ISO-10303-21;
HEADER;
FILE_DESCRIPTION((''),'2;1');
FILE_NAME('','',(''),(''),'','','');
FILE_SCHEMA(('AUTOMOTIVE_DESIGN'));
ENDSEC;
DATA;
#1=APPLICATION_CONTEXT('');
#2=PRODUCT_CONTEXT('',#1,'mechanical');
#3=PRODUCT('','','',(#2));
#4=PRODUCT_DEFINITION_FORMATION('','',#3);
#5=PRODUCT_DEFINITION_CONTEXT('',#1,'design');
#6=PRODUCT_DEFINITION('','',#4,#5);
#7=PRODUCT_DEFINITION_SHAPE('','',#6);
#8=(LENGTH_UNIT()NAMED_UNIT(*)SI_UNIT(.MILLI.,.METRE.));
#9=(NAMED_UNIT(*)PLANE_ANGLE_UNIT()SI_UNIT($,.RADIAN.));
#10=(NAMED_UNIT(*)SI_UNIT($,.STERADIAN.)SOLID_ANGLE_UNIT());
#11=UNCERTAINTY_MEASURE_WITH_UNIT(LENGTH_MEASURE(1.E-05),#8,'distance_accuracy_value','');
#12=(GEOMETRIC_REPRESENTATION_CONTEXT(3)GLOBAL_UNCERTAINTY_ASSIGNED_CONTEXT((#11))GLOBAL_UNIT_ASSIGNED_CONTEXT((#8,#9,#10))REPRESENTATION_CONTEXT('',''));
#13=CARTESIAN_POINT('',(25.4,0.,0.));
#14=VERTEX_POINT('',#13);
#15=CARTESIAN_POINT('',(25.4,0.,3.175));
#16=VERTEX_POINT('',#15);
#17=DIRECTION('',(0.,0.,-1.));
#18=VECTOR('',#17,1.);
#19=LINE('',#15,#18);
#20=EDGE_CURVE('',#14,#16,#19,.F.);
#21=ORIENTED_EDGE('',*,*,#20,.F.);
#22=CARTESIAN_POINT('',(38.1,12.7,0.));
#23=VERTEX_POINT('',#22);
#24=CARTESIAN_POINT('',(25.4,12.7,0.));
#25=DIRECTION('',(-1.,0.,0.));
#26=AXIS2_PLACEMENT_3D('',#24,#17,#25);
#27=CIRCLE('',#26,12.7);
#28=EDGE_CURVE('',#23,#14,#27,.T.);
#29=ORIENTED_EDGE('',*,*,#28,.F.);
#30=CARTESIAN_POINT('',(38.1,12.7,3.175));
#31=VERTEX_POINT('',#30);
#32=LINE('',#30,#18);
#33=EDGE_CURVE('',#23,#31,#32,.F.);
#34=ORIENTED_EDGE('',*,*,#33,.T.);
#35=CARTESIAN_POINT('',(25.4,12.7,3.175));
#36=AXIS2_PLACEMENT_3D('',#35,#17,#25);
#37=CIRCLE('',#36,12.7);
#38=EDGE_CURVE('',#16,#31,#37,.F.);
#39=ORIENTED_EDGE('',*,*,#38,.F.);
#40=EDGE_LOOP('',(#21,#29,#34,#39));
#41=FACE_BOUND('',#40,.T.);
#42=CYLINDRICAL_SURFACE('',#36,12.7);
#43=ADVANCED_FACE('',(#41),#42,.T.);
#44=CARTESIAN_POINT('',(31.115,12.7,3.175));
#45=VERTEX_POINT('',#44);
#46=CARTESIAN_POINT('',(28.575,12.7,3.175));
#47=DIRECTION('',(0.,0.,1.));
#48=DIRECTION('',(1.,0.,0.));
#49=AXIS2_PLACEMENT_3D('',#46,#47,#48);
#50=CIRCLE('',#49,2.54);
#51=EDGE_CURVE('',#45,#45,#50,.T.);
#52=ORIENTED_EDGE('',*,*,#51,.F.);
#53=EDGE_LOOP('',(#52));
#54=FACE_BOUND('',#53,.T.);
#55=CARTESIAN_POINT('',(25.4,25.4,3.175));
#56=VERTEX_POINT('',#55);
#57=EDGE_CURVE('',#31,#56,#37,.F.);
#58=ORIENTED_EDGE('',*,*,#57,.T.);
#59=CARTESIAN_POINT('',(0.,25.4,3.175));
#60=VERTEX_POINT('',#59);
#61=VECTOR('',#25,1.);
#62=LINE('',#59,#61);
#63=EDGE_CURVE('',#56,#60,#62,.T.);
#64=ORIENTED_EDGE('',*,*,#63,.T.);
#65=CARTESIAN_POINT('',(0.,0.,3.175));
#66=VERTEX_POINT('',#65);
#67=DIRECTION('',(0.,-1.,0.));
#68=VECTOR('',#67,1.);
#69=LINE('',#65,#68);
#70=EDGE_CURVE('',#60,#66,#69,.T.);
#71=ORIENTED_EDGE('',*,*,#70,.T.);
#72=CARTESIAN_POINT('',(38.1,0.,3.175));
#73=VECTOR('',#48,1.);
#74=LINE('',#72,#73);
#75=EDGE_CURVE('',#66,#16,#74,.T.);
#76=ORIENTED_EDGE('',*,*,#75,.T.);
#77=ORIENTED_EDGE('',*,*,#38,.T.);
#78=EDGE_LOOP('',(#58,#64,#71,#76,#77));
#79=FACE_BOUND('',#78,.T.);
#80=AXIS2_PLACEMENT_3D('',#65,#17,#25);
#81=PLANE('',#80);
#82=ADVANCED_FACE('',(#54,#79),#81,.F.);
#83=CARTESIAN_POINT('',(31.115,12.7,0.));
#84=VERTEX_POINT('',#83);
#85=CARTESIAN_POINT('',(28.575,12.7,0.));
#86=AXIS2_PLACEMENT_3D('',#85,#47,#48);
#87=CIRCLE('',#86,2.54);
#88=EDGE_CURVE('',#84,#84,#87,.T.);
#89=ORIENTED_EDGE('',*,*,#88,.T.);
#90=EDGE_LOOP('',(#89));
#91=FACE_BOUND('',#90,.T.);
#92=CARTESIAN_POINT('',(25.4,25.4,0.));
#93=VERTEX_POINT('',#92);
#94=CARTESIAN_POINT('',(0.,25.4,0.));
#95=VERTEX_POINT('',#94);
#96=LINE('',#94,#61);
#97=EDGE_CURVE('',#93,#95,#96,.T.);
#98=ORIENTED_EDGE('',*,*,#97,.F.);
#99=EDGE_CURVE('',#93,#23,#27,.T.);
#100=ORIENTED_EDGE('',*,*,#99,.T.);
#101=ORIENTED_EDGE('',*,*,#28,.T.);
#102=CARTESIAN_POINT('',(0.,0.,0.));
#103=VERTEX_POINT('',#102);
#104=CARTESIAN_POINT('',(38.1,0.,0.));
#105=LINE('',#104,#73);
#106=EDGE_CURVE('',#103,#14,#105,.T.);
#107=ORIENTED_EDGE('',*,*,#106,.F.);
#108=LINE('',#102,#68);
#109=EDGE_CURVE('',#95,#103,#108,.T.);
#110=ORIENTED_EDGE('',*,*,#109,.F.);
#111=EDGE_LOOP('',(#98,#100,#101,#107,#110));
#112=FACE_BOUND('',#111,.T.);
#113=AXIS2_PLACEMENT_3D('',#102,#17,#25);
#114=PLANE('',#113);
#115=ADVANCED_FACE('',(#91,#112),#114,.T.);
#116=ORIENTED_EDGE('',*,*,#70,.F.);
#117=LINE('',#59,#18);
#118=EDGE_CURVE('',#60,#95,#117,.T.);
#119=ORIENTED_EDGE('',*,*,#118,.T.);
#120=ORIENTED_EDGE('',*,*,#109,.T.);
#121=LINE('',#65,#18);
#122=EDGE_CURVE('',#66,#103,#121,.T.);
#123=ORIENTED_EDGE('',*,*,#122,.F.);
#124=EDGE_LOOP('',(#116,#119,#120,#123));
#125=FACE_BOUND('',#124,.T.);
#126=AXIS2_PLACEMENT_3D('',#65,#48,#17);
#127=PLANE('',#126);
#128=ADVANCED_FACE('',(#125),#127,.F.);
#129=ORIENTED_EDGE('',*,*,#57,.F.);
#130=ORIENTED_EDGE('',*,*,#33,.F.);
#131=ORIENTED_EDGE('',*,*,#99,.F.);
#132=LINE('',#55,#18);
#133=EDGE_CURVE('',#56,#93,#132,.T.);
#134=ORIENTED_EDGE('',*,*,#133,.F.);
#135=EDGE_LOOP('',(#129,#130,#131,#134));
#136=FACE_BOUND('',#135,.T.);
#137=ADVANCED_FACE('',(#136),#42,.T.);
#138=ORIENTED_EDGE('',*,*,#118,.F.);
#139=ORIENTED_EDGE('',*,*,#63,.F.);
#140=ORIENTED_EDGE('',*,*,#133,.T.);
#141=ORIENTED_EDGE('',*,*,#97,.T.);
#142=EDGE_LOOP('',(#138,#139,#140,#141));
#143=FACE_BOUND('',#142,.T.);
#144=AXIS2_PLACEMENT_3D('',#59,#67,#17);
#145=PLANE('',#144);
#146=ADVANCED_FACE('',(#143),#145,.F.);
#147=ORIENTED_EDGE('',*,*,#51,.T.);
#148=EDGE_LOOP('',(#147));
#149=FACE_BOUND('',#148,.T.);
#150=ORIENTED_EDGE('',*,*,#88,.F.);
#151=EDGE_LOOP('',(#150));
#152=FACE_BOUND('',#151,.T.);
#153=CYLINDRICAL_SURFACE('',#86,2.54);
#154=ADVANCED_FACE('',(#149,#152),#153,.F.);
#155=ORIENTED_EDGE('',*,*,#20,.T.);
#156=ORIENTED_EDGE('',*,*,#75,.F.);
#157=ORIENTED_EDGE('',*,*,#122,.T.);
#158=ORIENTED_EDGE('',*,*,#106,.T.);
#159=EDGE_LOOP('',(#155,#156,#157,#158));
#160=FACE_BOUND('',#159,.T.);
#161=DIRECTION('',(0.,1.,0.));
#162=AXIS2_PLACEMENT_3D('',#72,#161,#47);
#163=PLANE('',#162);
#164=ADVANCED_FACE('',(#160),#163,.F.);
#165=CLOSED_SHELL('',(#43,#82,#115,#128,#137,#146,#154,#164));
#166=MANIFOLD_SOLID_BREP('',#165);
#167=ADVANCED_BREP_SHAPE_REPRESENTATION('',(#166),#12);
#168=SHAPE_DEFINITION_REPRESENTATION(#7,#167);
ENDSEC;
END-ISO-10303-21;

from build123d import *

# Parameters (mm, degrees)
SKETCH1_W           = 38.1
SKETCH1_H           = 25.4
BOSS_EXTRUDE1_DEPTH = 3.175
FILLET1_R           = 12.7
SKETCH2_R           = 2.54
CUT_EXTRUDE1_DEPTH  = 46.900442536


with BuildPart() as part:
    # Sketch1 → Boss-Extrude1 (new body)
    with BuildSketch(Plane.XY):
        with Locations((19.05, 12.7)):
            Rectangle(SKETCH1_W, SKETCH1_H)
    extrude(amount=BOSS_EXTRUDE1_DEPTH)

    # Fillet1
    fillet1_edges = [part.edges().sort_by_distance(p)[0] for p in [
        (38.1, 0, 1.5875),
        (38.1, 25.4, 1.5875),
    ]]
    fillet(fillet1_edges, radius=FILLET1_R - 0.0001)  # a hair under: the kernel refuses the full size

    # Sketch2 → Cut-Extrude1 (cut, through all)
    with BuildSketch(Plane.XY.offset(3.175)):
        with Locations((28.575, 12.7)):
            Circle(SKETCH2_R)
    extrude(amount=-CUT_EXTRUDE1_DEPTH, mode=Mode.SUBTRACT)


solid = part.part
